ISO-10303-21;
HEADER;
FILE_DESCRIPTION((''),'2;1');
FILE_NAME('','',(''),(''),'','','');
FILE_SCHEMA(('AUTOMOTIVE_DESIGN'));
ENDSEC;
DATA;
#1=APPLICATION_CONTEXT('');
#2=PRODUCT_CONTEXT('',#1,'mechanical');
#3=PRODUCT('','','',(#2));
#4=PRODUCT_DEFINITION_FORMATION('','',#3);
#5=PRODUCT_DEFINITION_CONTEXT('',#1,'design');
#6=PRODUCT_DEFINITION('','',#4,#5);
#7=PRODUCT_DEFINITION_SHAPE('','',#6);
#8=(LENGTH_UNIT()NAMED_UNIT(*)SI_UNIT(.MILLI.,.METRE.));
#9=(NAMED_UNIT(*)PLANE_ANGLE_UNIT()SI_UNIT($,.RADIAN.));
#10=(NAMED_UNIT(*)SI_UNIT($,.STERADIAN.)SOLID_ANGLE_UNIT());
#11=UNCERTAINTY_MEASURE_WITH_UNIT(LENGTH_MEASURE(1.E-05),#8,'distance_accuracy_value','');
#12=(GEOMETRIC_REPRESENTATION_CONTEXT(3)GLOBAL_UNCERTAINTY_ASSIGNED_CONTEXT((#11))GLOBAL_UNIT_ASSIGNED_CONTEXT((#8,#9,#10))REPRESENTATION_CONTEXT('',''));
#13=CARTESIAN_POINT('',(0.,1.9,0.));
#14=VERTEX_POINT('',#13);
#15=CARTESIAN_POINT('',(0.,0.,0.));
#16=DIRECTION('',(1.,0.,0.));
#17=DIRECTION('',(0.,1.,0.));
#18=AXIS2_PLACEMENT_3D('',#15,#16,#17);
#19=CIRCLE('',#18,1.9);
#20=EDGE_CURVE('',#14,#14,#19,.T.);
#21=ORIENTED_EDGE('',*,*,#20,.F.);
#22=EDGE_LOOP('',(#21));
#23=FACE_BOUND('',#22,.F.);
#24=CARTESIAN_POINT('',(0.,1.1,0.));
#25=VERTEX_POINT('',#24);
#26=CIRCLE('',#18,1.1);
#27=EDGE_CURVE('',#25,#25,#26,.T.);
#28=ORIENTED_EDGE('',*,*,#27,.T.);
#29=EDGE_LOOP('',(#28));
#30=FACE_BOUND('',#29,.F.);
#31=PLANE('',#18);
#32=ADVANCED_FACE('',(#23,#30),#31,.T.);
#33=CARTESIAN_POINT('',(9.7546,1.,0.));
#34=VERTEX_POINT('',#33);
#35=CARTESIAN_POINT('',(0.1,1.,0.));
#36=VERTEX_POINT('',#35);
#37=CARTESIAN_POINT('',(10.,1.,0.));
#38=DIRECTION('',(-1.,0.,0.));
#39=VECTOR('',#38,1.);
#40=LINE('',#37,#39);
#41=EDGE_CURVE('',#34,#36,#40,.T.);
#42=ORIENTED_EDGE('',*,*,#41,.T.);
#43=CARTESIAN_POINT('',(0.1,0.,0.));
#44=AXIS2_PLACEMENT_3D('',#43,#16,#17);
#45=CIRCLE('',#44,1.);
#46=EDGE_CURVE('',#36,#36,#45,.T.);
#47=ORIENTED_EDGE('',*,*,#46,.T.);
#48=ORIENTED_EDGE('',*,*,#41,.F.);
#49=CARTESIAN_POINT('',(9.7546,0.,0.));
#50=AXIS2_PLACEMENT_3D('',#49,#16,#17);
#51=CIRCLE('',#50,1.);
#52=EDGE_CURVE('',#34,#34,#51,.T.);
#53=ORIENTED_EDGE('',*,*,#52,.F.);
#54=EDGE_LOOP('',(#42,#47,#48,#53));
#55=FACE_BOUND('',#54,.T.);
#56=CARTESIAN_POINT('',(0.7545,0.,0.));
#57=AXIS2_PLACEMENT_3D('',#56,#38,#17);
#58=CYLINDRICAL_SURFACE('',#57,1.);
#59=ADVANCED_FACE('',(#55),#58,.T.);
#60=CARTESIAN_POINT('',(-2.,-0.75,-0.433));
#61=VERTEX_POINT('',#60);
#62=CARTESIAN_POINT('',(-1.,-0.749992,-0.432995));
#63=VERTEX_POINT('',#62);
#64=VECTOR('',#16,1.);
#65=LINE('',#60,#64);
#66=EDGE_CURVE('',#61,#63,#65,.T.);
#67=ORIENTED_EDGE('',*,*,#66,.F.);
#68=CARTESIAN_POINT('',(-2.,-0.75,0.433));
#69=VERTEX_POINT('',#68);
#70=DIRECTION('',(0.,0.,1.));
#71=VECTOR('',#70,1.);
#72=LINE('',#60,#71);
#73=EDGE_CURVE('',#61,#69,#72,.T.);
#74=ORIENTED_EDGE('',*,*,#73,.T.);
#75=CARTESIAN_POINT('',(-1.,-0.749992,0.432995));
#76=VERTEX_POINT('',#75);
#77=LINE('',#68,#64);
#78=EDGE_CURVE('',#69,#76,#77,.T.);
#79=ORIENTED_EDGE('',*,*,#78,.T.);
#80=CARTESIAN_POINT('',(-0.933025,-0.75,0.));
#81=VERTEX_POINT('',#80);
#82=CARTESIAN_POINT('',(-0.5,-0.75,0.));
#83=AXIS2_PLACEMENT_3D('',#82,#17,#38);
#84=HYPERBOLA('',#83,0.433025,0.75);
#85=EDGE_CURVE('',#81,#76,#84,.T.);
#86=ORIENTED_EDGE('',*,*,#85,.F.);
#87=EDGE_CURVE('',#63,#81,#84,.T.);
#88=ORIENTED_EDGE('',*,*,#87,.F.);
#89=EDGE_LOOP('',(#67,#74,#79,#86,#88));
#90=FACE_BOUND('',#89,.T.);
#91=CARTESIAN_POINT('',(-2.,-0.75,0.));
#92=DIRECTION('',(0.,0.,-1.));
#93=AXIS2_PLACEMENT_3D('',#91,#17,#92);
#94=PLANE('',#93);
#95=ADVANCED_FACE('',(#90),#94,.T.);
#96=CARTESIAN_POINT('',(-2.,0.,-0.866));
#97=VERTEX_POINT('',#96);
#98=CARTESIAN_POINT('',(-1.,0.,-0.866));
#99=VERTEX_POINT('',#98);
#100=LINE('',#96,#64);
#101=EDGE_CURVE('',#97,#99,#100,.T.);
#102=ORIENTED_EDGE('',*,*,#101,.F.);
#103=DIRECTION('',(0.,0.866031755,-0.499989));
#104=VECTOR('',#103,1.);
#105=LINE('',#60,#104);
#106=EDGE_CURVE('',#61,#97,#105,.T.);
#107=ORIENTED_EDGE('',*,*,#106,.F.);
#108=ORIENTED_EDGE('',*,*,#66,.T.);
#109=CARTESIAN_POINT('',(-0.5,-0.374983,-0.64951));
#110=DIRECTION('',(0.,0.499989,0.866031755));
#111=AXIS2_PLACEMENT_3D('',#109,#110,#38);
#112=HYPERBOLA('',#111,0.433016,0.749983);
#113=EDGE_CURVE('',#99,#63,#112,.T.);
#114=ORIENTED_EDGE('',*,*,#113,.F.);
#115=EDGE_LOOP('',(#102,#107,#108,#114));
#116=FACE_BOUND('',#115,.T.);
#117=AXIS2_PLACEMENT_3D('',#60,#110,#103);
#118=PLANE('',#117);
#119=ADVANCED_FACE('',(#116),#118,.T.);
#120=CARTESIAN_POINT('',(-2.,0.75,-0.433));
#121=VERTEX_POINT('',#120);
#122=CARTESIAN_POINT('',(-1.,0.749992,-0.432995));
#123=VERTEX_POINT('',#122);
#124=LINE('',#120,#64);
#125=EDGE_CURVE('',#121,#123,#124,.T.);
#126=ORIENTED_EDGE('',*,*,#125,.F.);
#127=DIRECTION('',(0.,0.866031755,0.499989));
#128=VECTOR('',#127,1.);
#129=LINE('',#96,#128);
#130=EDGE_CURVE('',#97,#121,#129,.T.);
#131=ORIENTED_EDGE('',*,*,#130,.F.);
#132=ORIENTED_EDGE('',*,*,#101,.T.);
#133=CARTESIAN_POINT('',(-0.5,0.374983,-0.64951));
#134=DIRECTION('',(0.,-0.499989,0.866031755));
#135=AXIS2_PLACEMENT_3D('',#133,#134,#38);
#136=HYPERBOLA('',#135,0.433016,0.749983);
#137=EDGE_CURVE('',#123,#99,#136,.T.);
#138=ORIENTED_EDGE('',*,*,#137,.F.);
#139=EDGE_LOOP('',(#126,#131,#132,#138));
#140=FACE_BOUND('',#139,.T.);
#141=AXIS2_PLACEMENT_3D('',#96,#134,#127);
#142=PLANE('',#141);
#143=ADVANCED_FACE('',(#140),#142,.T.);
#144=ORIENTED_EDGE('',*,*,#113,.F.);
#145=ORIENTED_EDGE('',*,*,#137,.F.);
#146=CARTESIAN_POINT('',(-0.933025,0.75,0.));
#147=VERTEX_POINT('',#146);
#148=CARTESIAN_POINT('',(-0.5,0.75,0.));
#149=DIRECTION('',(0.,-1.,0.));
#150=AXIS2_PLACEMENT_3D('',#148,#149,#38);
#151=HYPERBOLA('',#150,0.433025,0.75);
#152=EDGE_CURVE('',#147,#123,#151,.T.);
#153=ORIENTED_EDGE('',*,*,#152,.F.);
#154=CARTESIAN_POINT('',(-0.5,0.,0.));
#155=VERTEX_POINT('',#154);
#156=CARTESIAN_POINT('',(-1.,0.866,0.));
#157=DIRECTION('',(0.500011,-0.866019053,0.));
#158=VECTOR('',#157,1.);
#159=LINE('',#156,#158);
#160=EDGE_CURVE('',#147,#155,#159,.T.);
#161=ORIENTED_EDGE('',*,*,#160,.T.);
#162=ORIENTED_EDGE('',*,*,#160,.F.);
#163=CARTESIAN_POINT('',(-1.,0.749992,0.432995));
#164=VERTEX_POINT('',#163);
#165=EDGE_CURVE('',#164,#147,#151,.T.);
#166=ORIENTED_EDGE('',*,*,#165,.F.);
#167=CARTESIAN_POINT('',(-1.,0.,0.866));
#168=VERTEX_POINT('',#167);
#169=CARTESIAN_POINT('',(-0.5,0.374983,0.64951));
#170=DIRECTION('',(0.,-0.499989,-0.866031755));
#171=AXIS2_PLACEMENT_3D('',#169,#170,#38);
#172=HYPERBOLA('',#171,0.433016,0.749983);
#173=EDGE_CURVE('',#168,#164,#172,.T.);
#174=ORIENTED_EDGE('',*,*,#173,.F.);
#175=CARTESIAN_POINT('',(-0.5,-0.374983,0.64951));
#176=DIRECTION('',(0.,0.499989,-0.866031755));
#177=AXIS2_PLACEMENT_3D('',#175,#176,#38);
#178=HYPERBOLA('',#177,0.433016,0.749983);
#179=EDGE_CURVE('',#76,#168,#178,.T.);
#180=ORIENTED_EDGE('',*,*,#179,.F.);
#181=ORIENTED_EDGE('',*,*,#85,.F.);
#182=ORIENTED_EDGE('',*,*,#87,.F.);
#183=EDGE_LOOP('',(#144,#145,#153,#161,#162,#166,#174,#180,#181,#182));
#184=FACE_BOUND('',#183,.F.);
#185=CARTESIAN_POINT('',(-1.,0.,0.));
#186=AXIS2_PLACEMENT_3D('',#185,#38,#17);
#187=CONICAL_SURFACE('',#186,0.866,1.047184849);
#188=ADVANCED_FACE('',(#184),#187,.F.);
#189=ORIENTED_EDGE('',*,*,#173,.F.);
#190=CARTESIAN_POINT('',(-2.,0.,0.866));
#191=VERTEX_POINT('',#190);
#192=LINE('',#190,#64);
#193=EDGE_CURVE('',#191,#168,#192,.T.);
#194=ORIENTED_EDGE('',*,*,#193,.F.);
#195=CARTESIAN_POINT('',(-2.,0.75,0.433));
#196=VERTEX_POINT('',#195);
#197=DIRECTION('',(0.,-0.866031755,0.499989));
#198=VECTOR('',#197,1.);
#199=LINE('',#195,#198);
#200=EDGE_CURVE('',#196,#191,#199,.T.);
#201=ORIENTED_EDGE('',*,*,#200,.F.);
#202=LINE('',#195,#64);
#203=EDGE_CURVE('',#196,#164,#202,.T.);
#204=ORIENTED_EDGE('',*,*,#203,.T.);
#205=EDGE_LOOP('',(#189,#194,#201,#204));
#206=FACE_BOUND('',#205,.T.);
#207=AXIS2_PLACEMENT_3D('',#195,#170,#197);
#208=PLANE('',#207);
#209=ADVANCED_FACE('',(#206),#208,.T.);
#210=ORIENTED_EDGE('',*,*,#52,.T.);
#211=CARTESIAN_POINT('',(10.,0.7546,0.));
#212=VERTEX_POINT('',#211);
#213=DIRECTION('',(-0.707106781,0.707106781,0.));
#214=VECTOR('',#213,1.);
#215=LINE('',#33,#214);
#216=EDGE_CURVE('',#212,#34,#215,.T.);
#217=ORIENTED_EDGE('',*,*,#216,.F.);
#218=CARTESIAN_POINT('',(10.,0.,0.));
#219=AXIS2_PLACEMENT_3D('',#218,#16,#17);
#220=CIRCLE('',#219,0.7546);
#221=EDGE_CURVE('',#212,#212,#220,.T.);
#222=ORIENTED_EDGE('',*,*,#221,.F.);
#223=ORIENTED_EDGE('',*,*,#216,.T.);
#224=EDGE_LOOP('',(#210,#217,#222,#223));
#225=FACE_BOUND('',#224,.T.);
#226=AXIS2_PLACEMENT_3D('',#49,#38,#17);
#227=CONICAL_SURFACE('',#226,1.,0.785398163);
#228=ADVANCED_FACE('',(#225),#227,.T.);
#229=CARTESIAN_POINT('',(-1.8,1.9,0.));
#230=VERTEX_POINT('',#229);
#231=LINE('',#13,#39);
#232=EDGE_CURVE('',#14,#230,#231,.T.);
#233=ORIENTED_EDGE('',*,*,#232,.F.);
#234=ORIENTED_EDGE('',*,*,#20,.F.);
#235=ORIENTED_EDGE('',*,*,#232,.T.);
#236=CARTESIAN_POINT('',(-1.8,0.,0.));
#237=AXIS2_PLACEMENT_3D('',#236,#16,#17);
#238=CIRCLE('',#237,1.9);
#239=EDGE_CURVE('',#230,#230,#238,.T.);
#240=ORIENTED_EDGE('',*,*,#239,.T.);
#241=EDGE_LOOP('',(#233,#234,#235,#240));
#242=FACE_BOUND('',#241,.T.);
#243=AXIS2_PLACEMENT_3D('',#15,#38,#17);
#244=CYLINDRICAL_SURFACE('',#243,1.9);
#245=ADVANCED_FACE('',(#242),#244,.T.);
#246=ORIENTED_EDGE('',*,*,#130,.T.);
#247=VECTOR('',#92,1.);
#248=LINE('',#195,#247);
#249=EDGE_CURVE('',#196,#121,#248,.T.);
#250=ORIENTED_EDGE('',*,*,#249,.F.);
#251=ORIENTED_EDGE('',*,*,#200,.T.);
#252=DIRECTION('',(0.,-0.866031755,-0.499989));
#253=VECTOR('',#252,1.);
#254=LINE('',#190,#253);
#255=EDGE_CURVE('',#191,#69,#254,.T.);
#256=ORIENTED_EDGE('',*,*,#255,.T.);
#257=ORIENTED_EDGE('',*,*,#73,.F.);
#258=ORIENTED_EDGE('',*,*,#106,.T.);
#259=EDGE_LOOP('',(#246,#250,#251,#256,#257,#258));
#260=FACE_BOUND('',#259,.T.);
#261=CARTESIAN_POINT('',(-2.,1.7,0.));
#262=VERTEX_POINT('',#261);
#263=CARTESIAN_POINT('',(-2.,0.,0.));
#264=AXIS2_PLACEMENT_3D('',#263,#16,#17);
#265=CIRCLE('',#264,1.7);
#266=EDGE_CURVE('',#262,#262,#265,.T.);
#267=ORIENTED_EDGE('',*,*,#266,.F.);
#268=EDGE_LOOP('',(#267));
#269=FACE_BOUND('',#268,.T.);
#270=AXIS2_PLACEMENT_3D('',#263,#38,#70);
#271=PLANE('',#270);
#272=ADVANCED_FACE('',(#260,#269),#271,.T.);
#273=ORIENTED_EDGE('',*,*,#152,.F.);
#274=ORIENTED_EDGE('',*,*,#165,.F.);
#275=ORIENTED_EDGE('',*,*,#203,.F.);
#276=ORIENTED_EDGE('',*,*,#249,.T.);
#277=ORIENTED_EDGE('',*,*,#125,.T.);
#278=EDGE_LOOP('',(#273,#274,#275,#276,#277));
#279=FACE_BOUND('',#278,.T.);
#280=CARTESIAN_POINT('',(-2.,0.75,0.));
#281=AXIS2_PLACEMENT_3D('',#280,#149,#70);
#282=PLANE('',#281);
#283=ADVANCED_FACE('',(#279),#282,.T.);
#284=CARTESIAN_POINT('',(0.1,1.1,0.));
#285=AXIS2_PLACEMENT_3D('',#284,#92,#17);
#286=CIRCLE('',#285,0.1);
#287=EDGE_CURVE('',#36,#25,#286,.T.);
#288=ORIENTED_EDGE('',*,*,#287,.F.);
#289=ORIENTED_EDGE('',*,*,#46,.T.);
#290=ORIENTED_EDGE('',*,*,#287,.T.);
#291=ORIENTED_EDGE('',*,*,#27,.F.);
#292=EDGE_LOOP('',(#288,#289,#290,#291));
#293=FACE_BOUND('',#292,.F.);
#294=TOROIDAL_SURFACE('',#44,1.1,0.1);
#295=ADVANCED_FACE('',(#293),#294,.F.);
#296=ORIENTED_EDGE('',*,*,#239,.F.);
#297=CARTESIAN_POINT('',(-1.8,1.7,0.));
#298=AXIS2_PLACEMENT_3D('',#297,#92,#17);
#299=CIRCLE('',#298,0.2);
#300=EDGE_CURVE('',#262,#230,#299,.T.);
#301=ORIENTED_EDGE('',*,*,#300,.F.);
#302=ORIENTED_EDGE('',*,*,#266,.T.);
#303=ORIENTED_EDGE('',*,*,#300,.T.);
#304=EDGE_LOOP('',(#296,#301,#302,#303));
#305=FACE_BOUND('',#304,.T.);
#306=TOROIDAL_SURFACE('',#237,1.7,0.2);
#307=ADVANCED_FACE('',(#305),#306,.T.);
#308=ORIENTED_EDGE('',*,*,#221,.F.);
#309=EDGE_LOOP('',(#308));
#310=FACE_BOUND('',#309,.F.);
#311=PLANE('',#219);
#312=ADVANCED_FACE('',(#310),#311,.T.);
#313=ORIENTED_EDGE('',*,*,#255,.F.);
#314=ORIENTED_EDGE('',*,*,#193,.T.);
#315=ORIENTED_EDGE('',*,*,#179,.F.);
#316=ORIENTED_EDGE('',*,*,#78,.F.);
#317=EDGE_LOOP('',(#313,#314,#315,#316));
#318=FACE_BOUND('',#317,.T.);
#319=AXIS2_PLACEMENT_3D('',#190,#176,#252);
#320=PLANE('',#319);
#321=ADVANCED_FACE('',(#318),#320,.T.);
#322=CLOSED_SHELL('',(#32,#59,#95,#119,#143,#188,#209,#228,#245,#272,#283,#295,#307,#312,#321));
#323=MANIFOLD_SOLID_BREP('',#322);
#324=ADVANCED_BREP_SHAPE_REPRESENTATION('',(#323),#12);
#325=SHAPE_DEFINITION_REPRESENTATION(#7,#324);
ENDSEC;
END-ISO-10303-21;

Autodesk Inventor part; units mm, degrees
ref_plane "YZ Plane" through (0, 0, 0) normal (1, 0, 0) x (0, 1, 0)
ref_plane "XZ Plane" through (0, 0, 0) normal (0, 1, 0) x (-1, 0, 0)
sketch "Sketch1" plane through (0, 0, 0) normal (0, 0, 1) x (1, 0, 0)
  line L0 (-0.5, 0) -> (10, 0)
  line L1 (10, 0) -> (10, 1)
  line L2 (10, 1) -> (1, 1)
  line L3 (1, 1) -> (0.7545, 1)
  line L4 (0.7545, 1) -> (0, 1)
  line L5 (0, 1) -> (0, 1.9)
  line L6 (0, 1.9) -> (-2, 1.9)
  line L7 (-2, 1.9) -> (-2, 0.866)
  line L8 (-2, 0.866) -> (-1, 0.866)
  line L9 (-1, 0.866) -> (-0.5, 0)
  line L10 (-4.4, 0) -> (12.4, 0) projected
  line L11 (0, -0.38) -> (0, 2.28) projected
  line L12 (1, 1) -> (0, 1) construction
  dimension "d1" = 9
  dimension "d2" = 0.2455
  dimension "d3" = 2
  dimension "d4" = 1
  dimension "d5" = 60
  dimension "d6" = 2
  dimension "d7" = 2
  dimension "d8" = 1.7321
  dimension "d9" = 3.8
  dimension "d26" = 10
revolve "Body" add sketch "Sketch1" angle 360 about axis through (-0.5, 0, 0) along (1, 0, 0)
sketch "Sketch2" plane through (-2, 0, 0) normal (-1, 0, 0) x (0, 0, 1)
  circle A0 centre (0, 0) radius 0.866 projected
  line L0 (0, -2.66) -> (0, 2.66) projected
  line L1 (-2.66, 0) -> (2.66, 0) projected
  line L2 (0.866, 0) -> (0.433, -0.75)
  line L3 (0.433, -0.75) -> (-0.433, -0.75)
  line L4 (-0.433, -0.75) -> (-0.866, 0)
  line L5 (-0.866, 0) -> (-0.433, 0.75)
  line L6 (-0.433, 0.75) -> (0.433, 0.75)
  line L7 (0.433, 0.75) -> (0.866, 0)
  point P0 (0, 0)
extrude "Slot" add sketch "Sketch2" against normal up to next contours L7 A0 | A0 L2 | L6 L0 A0 | A0 L0 L3 | L0 L6 A0 | A0 L3 L0 | L4 A0 | A0 L5
fillet "Fillet1" radius 0.2 1 edges at (-2, -1.9, 0)
thread "Thread" size "M2x0.4" class "6g" standard "ISO Metric profile" length 9
chamfer "Chamfer1" distance 0.2454 distance2 0.2454 1 edges at (10, -1, 0) measured on face at (10, -0.5392, -0.3309)
ref_plane "Work Plane1" through (29, 0, 0) normal (0, -1, 0) x (1, 0, 0)
fillet "Fillet2" radius 0.1 1 edges at (0, -1, 0)
equation "\"d30\" = R"
equation "\"d17\" = RR"
equation "\"d13\" = GEL"
equation "\"d15\" = -0.5 * SPD + 0.5 * GD"
equation "\"d16\" = GUL"
equation "\"d1\" = GEL"
equation "\"d3\" = KOH"
equation "\"d4\" = INTI"
equation "\"d6\" = GD"
equation "\"d7\" = BDM"
equation "\"d8\" = 1.1547 * SW"
equation "\"d9\" = KOD"
equation "\"d26\" = NLG"
equation "\"GD\" = 2"
equation "\"NLG\" = 10"
equation "\"GEL\" = 9"
equation "\"KOD\" = 3.8"
equation "\"KOH\" = 2"
equation "\"INTI\" = 1"
equation "\"GAL\" = 0.61345 * PTC"
equation "\"GUL\" = 0.61345 * PTC"
equation "\"BDM\" = NND"
equation "\"SW\" = 1.5"
equation "\"RR\" = 0.2"
equation "\"SPD\" = NND - 1.2269 * PTC"
equation "\"R\" = 0.1"
equation "\"TOA\" = 30deg"
equation "\"GD1\" = THREADDIA - 1.2269 * PTC"
equation "\"THREADDIA\" = 2"
equation "\"FAWI\" = 45deg"
equation "\"PTC\" = 0.4"
equation "\"NND\" = 2"
equation "\"E0\" = 1.155 * SW"
properties part number "ISO 4762 - M2 x 10" material "Stainless Steel, 440C"
